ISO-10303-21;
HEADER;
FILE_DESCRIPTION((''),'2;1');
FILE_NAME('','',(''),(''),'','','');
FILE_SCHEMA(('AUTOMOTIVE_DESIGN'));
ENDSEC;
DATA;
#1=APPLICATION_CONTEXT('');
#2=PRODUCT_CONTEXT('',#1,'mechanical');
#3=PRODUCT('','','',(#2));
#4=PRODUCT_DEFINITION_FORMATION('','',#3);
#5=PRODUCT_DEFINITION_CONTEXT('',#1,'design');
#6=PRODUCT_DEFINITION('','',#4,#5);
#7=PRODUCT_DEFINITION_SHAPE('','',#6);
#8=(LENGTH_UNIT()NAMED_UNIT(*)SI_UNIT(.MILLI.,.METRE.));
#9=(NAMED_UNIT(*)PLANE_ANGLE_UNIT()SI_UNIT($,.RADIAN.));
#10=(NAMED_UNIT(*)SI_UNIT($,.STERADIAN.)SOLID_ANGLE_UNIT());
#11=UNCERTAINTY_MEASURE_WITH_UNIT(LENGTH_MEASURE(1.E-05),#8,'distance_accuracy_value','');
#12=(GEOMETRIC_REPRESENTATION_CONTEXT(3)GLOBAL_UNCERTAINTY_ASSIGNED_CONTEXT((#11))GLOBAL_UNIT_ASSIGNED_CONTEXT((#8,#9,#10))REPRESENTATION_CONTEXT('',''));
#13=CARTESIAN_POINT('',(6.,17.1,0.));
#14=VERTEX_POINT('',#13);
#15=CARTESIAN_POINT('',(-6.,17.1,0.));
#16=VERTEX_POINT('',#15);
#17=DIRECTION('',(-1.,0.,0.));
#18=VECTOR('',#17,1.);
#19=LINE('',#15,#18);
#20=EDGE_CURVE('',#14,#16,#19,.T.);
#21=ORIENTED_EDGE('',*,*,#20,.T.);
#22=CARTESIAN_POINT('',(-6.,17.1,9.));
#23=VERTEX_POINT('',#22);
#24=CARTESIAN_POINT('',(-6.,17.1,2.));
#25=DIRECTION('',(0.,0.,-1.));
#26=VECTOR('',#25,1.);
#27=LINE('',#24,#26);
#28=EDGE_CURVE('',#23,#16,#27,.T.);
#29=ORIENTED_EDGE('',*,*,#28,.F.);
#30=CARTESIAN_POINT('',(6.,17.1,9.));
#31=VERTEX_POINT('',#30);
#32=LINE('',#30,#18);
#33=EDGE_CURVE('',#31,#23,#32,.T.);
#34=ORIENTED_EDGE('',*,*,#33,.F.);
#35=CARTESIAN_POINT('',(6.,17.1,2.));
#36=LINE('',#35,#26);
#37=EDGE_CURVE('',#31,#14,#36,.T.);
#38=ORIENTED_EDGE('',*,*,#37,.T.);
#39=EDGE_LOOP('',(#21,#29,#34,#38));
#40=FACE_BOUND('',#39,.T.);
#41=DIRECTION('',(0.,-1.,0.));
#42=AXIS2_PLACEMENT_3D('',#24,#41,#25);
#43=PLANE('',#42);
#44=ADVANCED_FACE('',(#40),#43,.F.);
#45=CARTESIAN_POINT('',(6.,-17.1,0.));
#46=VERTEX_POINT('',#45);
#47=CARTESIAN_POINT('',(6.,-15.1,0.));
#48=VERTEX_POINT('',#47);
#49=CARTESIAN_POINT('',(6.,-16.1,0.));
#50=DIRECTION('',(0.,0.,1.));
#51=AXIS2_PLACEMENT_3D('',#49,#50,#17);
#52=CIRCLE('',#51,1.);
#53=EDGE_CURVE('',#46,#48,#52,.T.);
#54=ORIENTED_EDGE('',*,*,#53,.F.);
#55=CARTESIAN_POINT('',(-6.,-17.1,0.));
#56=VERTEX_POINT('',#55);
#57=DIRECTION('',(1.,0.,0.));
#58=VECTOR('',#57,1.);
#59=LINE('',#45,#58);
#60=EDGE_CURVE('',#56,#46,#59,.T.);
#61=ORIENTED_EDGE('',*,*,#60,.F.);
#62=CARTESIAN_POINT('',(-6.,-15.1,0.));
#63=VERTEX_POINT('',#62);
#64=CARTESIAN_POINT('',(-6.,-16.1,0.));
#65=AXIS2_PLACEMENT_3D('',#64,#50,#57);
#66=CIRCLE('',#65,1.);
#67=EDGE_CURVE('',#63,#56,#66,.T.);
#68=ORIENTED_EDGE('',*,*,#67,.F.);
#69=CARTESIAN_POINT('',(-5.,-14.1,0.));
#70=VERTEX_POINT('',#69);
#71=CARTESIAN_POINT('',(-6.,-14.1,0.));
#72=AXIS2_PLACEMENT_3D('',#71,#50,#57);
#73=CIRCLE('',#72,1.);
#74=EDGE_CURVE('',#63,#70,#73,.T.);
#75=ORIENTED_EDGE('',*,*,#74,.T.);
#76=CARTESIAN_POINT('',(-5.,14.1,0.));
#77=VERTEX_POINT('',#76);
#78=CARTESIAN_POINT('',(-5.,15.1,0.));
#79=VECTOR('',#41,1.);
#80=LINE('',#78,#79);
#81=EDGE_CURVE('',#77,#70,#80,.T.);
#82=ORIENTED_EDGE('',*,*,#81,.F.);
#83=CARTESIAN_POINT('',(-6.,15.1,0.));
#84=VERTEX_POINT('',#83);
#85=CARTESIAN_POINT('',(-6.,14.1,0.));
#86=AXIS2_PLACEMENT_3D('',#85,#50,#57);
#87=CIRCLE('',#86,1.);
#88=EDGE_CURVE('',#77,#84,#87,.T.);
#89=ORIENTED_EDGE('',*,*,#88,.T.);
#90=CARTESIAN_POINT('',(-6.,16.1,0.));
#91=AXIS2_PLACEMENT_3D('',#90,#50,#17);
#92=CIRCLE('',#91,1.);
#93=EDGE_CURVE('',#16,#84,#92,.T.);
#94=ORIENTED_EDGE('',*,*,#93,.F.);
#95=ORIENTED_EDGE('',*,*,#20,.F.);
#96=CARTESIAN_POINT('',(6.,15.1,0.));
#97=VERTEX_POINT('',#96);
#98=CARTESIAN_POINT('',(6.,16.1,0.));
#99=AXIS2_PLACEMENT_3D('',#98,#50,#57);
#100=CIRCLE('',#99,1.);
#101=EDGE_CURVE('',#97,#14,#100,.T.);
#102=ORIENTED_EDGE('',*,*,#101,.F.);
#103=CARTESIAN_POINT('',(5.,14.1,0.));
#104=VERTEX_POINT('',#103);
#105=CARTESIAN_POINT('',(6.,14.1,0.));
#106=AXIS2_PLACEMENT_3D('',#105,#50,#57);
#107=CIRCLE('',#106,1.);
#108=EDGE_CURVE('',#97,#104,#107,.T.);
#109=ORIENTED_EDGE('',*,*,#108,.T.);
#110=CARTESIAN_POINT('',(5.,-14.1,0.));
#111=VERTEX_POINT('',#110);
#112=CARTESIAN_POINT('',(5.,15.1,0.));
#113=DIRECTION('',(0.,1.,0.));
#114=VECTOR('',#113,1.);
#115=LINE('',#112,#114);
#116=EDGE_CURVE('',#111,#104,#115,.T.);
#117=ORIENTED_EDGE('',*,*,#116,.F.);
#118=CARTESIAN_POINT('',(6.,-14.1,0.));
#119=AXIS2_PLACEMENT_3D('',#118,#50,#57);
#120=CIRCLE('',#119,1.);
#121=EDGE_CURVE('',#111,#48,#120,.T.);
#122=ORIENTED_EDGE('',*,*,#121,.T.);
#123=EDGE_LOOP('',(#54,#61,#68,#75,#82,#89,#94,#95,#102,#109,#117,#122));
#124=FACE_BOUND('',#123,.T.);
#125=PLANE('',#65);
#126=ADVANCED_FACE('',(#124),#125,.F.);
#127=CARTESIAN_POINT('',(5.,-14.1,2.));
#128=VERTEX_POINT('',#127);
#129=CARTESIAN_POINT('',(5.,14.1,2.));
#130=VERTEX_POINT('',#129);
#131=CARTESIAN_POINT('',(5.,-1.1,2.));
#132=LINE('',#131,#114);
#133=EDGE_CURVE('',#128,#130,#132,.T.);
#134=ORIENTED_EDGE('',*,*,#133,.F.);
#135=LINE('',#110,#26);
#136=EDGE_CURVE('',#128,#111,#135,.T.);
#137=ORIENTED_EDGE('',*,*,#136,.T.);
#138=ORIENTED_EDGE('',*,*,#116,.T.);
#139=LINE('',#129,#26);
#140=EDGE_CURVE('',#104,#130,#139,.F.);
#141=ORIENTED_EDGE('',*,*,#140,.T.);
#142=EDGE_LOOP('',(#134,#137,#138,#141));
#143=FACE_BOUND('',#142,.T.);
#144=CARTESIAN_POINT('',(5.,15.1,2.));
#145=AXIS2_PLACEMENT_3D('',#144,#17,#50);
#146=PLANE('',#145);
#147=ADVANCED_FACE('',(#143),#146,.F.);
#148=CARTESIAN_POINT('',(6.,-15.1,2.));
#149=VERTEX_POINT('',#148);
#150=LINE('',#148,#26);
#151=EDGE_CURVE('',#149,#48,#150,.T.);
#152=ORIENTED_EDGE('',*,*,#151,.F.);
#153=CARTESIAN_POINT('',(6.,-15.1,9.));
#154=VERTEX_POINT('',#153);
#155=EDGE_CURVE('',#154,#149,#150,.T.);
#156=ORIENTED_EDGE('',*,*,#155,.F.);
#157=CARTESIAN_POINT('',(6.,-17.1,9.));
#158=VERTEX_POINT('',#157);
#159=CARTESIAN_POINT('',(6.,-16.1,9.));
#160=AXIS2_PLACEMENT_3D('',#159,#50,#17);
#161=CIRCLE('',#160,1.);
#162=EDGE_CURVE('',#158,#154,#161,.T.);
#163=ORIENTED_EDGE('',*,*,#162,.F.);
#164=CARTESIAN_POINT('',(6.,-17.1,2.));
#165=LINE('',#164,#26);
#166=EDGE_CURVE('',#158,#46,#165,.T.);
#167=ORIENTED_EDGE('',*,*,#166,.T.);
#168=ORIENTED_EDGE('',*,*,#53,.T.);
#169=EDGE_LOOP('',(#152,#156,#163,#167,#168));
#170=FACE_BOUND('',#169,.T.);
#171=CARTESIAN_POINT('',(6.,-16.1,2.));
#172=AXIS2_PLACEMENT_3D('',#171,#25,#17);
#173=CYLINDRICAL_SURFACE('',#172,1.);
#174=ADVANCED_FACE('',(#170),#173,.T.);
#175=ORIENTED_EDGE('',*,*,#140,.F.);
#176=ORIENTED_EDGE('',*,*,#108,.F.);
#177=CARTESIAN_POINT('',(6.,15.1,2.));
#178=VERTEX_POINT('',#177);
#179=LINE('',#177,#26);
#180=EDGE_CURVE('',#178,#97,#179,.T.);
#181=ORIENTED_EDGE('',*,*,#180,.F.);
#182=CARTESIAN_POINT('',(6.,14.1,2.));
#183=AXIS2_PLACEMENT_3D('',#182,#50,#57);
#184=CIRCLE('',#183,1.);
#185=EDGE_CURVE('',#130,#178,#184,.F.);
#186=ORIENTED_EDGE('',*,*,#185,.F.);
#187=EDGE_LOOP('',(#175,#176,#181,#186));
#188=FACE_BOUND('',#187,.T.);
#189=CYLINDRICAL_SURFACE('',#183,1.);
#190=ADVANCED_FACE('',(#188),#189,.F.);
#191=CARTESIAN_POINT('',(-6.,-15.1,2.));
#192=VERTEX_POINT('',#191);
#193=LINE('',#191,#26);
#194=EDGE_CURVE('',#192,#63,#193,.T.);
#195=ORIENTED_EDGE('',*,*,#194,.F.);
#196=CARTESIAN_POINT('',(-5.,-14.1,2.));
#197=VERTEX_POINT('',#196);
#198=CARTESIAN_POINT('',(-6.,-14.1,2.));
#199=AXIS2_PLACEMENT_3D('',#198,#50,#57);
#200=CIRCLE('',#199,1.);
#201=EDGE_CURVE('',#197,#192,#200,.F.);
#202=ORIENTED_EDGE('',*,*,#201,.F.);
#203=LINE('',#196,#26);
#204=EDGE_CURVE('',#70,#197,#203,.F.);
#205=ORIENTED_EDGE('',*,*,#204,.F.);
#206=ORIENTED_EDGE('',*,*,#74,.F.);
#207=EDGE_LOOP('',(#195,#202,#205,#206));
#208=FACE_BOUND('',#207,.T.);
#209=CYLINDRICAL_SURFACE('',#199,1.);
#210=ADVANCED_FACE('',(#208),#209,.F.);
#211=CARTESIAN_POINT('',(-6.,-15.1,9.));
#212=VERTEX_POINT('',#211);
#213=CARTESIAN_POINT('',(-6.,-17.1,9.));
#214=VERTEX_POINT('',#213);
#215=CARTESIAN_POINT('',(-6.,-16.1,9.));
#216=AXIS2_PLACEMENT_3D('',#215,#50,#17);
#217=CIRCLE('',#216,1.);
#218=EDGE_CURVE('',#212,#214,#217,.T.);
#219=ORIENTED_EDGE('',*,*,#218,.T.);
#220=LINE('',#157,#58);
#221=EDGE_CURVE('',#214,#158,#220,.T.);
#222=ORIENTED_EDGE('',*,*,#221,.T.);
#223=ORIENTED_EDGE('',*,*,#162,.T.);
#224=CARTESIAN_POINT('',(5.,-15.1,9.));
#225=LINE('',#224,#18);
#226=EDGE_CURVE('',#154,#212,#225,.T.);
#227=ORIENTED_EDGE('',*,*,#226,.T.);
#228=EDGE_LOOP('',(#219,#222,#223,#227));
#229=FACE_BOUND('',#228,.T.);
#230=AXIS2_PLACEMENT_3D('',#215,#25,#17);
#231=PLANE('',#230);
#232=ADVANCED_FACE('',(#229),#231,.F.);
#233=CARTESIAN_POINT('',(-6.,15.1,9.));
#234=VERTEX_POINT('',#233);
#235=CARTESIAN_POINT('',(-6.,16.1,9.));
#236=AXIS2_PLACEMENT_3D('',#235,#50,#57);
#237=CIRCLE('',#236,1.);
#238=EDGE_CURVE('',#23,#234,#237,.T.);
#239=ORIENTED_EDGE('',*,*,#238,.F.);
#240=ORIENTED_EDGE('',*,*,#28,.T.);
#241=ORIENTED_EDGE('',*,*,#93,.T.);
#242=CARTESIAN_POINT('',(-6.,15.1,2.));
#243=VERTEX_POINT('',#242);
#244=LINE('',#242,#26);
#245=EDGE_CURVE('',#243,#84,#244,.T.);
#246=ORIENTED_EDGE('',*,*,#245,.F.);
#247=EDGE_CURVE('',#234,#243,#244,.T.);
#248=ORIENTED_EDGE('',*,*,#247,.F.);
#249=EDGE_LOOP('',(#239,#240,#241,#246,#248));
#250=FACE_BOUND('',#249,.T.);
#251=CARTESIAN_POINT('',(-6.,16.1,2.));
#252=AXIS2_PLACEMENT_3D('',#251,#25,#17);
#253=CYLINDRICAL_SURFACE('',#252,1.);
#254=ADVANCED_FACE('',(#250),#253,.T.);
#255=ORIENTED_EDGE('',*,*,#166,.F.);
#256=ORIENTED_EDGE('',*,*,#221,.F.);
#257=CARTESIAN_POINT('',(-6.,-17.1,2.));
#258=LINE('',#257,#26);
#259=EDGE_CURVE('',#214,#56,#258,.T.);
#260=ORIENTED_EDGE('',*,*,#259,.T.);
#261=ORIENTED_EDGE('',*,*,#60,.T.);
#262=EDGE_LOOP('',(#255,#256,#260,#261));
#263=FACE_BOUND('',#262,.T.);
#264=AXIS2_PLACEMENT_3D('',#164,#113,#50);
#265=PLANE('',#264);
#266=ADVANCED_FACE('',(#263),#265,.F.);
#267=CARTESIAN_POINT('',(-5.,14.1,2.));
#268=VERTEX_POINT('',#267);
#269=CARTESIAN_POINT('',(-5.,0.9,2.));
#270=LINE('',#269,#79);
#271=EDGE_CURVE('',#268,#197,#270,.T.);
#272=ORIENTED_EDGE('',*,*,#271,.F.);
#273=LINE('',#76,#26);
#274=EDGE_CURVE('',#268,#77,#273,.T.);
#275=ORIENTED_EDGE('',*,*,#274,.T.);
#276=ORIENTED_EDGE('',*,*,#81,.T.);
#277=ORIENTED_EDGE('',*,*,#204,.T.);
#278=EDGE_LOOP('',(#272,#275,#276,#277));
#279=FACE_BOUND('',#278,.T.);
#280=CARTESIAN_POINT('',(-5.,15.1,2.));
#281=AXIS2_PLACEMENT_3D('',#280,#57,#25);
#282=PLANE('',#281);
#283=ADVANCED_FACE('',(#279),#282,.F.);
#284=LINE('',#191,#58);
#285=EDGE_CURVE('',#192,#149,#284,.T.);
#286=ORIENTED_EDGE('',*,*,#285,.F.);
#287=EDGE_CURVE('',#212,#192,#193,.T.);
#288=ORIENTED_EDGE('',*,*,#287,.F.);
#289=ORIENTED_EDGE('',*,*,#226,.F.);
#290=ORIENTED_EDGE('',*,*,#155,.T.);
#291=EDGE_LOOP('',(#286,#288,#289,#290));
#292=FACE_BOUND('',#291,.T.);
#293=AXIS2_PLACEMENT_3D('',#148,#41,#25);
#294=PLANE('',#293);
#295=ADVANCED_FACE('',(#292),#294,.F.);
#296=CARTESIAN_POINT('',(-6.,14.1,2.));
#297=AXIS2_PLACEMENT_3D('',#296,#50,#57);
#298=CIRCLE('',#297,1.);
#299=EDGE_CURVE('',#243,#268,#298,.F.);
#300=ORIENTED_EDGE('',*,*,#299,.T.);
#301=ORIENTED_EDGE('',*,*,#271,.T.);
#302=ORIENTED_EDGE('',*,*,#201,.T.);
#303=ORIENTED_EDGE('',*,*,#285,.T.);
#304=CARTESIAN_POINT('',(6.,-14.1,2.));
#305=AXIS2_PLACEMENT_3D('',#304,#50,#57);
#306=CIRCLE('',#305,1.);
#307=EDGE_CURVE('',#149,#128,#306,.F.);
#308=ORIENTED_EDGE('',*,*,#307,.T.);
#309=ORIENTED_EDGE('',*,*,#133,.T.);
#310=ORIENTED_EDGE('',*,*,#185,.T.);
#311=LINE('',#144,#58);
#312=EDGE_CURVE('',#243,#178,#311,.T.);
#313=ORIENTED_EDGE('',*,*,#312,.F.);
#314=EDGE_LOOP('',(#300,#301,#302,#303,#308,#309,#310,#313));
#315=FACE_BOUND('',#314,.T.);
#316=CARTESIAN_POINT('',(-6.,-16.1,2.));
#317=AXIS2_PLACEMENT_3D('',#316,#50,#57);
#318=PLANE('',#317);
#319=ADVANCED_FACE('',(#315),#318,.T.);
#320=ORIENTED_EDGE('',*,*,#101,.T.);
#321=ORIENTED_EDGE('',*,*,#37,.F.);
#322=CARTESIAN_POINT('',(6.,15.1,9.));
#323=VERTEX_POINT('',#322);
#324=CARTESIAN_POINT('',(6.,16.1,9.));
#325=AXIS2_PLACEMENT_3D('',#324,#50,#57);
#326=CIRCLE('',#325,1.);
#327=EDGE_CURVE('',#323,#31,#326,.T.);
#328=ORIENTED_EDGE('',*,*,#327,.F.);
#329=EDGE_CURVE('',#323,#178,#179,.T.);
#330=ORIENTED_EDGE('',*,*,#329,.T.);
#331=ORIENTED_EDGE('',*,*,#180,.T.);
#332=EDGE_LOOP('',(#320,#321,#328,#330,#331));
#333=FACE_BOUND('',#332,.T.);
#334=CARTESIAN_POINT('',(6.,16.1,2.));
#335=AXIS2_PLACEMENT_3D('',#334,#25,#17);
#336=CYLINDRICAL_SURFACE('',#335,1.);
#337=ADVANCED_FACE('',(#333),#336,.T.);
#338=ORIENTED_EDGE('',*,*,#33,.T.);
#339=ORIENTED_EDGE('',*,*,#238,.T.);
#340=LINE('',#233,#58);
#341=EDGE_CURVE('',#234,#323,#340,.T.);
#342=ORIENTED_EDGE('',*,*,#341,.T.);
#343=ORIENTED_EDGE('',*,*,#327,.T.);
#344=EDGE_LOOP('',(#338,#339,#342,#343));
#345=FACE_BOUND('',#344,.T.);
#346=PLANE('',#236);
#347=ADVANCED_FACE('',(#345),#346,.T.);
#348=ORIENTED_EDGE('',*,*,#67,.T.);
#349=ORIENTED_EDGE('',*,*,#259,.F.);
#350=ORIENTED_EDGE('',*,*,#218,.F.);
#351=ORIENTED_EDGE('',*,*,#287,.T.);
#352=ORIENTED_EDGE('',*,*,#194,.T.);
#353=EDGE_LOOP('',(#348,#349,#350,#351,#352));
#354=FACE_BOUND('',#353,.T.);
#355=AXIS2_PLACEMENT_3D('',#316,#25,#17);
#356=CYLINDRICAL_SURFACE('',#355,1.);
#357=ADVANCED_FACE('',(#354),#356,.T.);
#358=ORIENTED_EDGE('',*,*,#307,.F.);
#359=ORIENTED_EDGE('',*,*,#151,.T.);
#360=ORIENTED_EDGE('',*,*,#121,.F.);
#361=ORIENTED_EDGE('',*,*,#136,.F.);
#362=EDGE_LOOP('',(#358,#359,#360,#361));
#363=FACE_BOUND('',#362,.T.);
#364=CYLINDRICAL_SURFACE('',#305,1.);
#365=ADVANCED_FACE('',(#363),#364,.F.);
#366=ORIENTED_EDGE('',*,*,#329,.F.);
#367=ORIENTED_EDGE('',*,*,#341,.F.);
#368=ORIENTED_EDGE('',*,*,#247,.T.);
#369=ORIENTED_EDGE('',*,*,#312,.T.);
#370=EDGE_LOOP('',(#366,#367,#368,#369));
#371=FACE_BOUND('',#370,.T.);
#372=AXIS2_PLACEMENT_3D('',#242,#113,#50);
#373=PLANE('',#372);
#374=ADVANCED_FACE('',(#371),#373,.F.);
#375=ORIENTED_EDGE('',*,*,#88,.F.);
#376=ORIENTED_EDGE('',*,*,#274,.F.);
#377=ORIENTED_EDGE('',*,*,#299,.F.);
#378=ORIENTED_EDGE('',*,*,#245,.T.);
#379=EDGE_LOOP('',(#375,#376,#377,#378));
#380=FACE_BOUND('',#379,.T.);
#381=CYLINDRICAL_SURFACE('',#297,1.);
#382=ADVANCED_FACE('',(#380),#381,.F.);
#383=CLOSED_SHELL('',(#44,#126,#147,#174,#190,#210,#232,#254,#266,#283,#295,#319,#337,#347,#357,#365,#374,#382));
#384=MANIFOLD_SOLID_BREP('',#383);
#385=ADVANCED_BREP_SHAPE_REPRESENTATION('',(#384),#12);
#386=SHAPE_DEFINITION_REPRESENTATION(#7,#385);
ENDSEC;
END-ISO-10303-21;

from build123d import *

# Parameters (mm, degrees)
BOSS_EXTRUDE3_DEPTH = 2
BOSS_EXTRUDE4_DEPTH = 7
FILLET2_R           = 1


with BuildPart() as part:
    # Sketch1 → Boss-Extrude3 (new body)
    with BuildSketch(Plane.XY):
        with BuildLine():
            Line((-5, 15.1), (-5, 0.9))
            Line((-5, 0.9), (-5, -1.1))
            Line((-5, -1.1), (-5, -15.1))
            Line((-5, -15.1), (-6, -15.1))
            ThreePointArc((-6, -15.1), (-7, -16.1), (-6, -17.1))
            Line((-6, -17.1), (5, -17.1))
            Line((5, -17.1), (6, -17.1))
            ThreePointArc((6, -17.1), (7, -16.1), (6, -15.1))
            Line((6, -15.1), (5, -15.1))
            Line((5, -15.1), (5, -1.1))
            Line((5, -1.1), (5, 0.9))
            Line((5, 0.9), (5, 15.1))
            Line((5, 15.1), (6, 15.1))
            ThreePointArc((6, 15.1), (7, 16.1), (6, 17.1))
            Line((6, 17.1), (5, 17.1))
            Line((5, 17.1), (-5, 17.1))
            Line((-5, 17.1), (-6, 17.1))
            ThreePointArc((-6, 17.1), (-7, 16.1), (-6, 15.1))
            Line((-6, 15.1), (-5, 15.1))
        make_face()
    extrude(amount=BOSS_EXTRUDE3_DEPTH)

    # Sketch3 → Boss-Extrude4 (add)
    with BuildSketch(Plane.XY.offset(2)):
        with BuildLine():
            Line((-6, 15.1), (-5, 15.1))
            Line((-5, 15.1), (5, 15.1))
            Line((5, 15.1), (6, 15.1))
            ThreePointArc((6, 15.1), (7, 16.1), (6, 17.1))
            Line((6, 17.1), (-6, 17.1))
            ThreePointArc((-6, 17.1), (-7, 16.1), (-6, 15.1))
        make_face()
        with BuildLine():
            Line((-6, -15.1), (-5, -15.1))
            Line((-5, -15.1), (5, -15.1))
            Line((5, -15.1), (6, -15.1))
            ThreePointArc((6, -15.1), (7, -16.1), (6, -17.1))
            Line((6, -17.1), (-6, -17.1))
            ThreePointArc((-6, -17.1), (-7, -16.1), (-6, -15.1))
        make_face()
    extrude(amount=BOSS_EXTRUDE4_DEPTH)

    # Fillet2
    fillet2_edges = [part.edges().sort_by_distance(p)[0] for p in [
        (-5, 15.1, 1),
        (-5, -15.1, 1),
        (5, 15.1, 1),
        (5, -15.1, 1),
    ]]
    fillet(fillet2_edges, radius=FILLET2_R - 0.0001)  # a hair under: the kernel refuses the full size


solid = part.part
